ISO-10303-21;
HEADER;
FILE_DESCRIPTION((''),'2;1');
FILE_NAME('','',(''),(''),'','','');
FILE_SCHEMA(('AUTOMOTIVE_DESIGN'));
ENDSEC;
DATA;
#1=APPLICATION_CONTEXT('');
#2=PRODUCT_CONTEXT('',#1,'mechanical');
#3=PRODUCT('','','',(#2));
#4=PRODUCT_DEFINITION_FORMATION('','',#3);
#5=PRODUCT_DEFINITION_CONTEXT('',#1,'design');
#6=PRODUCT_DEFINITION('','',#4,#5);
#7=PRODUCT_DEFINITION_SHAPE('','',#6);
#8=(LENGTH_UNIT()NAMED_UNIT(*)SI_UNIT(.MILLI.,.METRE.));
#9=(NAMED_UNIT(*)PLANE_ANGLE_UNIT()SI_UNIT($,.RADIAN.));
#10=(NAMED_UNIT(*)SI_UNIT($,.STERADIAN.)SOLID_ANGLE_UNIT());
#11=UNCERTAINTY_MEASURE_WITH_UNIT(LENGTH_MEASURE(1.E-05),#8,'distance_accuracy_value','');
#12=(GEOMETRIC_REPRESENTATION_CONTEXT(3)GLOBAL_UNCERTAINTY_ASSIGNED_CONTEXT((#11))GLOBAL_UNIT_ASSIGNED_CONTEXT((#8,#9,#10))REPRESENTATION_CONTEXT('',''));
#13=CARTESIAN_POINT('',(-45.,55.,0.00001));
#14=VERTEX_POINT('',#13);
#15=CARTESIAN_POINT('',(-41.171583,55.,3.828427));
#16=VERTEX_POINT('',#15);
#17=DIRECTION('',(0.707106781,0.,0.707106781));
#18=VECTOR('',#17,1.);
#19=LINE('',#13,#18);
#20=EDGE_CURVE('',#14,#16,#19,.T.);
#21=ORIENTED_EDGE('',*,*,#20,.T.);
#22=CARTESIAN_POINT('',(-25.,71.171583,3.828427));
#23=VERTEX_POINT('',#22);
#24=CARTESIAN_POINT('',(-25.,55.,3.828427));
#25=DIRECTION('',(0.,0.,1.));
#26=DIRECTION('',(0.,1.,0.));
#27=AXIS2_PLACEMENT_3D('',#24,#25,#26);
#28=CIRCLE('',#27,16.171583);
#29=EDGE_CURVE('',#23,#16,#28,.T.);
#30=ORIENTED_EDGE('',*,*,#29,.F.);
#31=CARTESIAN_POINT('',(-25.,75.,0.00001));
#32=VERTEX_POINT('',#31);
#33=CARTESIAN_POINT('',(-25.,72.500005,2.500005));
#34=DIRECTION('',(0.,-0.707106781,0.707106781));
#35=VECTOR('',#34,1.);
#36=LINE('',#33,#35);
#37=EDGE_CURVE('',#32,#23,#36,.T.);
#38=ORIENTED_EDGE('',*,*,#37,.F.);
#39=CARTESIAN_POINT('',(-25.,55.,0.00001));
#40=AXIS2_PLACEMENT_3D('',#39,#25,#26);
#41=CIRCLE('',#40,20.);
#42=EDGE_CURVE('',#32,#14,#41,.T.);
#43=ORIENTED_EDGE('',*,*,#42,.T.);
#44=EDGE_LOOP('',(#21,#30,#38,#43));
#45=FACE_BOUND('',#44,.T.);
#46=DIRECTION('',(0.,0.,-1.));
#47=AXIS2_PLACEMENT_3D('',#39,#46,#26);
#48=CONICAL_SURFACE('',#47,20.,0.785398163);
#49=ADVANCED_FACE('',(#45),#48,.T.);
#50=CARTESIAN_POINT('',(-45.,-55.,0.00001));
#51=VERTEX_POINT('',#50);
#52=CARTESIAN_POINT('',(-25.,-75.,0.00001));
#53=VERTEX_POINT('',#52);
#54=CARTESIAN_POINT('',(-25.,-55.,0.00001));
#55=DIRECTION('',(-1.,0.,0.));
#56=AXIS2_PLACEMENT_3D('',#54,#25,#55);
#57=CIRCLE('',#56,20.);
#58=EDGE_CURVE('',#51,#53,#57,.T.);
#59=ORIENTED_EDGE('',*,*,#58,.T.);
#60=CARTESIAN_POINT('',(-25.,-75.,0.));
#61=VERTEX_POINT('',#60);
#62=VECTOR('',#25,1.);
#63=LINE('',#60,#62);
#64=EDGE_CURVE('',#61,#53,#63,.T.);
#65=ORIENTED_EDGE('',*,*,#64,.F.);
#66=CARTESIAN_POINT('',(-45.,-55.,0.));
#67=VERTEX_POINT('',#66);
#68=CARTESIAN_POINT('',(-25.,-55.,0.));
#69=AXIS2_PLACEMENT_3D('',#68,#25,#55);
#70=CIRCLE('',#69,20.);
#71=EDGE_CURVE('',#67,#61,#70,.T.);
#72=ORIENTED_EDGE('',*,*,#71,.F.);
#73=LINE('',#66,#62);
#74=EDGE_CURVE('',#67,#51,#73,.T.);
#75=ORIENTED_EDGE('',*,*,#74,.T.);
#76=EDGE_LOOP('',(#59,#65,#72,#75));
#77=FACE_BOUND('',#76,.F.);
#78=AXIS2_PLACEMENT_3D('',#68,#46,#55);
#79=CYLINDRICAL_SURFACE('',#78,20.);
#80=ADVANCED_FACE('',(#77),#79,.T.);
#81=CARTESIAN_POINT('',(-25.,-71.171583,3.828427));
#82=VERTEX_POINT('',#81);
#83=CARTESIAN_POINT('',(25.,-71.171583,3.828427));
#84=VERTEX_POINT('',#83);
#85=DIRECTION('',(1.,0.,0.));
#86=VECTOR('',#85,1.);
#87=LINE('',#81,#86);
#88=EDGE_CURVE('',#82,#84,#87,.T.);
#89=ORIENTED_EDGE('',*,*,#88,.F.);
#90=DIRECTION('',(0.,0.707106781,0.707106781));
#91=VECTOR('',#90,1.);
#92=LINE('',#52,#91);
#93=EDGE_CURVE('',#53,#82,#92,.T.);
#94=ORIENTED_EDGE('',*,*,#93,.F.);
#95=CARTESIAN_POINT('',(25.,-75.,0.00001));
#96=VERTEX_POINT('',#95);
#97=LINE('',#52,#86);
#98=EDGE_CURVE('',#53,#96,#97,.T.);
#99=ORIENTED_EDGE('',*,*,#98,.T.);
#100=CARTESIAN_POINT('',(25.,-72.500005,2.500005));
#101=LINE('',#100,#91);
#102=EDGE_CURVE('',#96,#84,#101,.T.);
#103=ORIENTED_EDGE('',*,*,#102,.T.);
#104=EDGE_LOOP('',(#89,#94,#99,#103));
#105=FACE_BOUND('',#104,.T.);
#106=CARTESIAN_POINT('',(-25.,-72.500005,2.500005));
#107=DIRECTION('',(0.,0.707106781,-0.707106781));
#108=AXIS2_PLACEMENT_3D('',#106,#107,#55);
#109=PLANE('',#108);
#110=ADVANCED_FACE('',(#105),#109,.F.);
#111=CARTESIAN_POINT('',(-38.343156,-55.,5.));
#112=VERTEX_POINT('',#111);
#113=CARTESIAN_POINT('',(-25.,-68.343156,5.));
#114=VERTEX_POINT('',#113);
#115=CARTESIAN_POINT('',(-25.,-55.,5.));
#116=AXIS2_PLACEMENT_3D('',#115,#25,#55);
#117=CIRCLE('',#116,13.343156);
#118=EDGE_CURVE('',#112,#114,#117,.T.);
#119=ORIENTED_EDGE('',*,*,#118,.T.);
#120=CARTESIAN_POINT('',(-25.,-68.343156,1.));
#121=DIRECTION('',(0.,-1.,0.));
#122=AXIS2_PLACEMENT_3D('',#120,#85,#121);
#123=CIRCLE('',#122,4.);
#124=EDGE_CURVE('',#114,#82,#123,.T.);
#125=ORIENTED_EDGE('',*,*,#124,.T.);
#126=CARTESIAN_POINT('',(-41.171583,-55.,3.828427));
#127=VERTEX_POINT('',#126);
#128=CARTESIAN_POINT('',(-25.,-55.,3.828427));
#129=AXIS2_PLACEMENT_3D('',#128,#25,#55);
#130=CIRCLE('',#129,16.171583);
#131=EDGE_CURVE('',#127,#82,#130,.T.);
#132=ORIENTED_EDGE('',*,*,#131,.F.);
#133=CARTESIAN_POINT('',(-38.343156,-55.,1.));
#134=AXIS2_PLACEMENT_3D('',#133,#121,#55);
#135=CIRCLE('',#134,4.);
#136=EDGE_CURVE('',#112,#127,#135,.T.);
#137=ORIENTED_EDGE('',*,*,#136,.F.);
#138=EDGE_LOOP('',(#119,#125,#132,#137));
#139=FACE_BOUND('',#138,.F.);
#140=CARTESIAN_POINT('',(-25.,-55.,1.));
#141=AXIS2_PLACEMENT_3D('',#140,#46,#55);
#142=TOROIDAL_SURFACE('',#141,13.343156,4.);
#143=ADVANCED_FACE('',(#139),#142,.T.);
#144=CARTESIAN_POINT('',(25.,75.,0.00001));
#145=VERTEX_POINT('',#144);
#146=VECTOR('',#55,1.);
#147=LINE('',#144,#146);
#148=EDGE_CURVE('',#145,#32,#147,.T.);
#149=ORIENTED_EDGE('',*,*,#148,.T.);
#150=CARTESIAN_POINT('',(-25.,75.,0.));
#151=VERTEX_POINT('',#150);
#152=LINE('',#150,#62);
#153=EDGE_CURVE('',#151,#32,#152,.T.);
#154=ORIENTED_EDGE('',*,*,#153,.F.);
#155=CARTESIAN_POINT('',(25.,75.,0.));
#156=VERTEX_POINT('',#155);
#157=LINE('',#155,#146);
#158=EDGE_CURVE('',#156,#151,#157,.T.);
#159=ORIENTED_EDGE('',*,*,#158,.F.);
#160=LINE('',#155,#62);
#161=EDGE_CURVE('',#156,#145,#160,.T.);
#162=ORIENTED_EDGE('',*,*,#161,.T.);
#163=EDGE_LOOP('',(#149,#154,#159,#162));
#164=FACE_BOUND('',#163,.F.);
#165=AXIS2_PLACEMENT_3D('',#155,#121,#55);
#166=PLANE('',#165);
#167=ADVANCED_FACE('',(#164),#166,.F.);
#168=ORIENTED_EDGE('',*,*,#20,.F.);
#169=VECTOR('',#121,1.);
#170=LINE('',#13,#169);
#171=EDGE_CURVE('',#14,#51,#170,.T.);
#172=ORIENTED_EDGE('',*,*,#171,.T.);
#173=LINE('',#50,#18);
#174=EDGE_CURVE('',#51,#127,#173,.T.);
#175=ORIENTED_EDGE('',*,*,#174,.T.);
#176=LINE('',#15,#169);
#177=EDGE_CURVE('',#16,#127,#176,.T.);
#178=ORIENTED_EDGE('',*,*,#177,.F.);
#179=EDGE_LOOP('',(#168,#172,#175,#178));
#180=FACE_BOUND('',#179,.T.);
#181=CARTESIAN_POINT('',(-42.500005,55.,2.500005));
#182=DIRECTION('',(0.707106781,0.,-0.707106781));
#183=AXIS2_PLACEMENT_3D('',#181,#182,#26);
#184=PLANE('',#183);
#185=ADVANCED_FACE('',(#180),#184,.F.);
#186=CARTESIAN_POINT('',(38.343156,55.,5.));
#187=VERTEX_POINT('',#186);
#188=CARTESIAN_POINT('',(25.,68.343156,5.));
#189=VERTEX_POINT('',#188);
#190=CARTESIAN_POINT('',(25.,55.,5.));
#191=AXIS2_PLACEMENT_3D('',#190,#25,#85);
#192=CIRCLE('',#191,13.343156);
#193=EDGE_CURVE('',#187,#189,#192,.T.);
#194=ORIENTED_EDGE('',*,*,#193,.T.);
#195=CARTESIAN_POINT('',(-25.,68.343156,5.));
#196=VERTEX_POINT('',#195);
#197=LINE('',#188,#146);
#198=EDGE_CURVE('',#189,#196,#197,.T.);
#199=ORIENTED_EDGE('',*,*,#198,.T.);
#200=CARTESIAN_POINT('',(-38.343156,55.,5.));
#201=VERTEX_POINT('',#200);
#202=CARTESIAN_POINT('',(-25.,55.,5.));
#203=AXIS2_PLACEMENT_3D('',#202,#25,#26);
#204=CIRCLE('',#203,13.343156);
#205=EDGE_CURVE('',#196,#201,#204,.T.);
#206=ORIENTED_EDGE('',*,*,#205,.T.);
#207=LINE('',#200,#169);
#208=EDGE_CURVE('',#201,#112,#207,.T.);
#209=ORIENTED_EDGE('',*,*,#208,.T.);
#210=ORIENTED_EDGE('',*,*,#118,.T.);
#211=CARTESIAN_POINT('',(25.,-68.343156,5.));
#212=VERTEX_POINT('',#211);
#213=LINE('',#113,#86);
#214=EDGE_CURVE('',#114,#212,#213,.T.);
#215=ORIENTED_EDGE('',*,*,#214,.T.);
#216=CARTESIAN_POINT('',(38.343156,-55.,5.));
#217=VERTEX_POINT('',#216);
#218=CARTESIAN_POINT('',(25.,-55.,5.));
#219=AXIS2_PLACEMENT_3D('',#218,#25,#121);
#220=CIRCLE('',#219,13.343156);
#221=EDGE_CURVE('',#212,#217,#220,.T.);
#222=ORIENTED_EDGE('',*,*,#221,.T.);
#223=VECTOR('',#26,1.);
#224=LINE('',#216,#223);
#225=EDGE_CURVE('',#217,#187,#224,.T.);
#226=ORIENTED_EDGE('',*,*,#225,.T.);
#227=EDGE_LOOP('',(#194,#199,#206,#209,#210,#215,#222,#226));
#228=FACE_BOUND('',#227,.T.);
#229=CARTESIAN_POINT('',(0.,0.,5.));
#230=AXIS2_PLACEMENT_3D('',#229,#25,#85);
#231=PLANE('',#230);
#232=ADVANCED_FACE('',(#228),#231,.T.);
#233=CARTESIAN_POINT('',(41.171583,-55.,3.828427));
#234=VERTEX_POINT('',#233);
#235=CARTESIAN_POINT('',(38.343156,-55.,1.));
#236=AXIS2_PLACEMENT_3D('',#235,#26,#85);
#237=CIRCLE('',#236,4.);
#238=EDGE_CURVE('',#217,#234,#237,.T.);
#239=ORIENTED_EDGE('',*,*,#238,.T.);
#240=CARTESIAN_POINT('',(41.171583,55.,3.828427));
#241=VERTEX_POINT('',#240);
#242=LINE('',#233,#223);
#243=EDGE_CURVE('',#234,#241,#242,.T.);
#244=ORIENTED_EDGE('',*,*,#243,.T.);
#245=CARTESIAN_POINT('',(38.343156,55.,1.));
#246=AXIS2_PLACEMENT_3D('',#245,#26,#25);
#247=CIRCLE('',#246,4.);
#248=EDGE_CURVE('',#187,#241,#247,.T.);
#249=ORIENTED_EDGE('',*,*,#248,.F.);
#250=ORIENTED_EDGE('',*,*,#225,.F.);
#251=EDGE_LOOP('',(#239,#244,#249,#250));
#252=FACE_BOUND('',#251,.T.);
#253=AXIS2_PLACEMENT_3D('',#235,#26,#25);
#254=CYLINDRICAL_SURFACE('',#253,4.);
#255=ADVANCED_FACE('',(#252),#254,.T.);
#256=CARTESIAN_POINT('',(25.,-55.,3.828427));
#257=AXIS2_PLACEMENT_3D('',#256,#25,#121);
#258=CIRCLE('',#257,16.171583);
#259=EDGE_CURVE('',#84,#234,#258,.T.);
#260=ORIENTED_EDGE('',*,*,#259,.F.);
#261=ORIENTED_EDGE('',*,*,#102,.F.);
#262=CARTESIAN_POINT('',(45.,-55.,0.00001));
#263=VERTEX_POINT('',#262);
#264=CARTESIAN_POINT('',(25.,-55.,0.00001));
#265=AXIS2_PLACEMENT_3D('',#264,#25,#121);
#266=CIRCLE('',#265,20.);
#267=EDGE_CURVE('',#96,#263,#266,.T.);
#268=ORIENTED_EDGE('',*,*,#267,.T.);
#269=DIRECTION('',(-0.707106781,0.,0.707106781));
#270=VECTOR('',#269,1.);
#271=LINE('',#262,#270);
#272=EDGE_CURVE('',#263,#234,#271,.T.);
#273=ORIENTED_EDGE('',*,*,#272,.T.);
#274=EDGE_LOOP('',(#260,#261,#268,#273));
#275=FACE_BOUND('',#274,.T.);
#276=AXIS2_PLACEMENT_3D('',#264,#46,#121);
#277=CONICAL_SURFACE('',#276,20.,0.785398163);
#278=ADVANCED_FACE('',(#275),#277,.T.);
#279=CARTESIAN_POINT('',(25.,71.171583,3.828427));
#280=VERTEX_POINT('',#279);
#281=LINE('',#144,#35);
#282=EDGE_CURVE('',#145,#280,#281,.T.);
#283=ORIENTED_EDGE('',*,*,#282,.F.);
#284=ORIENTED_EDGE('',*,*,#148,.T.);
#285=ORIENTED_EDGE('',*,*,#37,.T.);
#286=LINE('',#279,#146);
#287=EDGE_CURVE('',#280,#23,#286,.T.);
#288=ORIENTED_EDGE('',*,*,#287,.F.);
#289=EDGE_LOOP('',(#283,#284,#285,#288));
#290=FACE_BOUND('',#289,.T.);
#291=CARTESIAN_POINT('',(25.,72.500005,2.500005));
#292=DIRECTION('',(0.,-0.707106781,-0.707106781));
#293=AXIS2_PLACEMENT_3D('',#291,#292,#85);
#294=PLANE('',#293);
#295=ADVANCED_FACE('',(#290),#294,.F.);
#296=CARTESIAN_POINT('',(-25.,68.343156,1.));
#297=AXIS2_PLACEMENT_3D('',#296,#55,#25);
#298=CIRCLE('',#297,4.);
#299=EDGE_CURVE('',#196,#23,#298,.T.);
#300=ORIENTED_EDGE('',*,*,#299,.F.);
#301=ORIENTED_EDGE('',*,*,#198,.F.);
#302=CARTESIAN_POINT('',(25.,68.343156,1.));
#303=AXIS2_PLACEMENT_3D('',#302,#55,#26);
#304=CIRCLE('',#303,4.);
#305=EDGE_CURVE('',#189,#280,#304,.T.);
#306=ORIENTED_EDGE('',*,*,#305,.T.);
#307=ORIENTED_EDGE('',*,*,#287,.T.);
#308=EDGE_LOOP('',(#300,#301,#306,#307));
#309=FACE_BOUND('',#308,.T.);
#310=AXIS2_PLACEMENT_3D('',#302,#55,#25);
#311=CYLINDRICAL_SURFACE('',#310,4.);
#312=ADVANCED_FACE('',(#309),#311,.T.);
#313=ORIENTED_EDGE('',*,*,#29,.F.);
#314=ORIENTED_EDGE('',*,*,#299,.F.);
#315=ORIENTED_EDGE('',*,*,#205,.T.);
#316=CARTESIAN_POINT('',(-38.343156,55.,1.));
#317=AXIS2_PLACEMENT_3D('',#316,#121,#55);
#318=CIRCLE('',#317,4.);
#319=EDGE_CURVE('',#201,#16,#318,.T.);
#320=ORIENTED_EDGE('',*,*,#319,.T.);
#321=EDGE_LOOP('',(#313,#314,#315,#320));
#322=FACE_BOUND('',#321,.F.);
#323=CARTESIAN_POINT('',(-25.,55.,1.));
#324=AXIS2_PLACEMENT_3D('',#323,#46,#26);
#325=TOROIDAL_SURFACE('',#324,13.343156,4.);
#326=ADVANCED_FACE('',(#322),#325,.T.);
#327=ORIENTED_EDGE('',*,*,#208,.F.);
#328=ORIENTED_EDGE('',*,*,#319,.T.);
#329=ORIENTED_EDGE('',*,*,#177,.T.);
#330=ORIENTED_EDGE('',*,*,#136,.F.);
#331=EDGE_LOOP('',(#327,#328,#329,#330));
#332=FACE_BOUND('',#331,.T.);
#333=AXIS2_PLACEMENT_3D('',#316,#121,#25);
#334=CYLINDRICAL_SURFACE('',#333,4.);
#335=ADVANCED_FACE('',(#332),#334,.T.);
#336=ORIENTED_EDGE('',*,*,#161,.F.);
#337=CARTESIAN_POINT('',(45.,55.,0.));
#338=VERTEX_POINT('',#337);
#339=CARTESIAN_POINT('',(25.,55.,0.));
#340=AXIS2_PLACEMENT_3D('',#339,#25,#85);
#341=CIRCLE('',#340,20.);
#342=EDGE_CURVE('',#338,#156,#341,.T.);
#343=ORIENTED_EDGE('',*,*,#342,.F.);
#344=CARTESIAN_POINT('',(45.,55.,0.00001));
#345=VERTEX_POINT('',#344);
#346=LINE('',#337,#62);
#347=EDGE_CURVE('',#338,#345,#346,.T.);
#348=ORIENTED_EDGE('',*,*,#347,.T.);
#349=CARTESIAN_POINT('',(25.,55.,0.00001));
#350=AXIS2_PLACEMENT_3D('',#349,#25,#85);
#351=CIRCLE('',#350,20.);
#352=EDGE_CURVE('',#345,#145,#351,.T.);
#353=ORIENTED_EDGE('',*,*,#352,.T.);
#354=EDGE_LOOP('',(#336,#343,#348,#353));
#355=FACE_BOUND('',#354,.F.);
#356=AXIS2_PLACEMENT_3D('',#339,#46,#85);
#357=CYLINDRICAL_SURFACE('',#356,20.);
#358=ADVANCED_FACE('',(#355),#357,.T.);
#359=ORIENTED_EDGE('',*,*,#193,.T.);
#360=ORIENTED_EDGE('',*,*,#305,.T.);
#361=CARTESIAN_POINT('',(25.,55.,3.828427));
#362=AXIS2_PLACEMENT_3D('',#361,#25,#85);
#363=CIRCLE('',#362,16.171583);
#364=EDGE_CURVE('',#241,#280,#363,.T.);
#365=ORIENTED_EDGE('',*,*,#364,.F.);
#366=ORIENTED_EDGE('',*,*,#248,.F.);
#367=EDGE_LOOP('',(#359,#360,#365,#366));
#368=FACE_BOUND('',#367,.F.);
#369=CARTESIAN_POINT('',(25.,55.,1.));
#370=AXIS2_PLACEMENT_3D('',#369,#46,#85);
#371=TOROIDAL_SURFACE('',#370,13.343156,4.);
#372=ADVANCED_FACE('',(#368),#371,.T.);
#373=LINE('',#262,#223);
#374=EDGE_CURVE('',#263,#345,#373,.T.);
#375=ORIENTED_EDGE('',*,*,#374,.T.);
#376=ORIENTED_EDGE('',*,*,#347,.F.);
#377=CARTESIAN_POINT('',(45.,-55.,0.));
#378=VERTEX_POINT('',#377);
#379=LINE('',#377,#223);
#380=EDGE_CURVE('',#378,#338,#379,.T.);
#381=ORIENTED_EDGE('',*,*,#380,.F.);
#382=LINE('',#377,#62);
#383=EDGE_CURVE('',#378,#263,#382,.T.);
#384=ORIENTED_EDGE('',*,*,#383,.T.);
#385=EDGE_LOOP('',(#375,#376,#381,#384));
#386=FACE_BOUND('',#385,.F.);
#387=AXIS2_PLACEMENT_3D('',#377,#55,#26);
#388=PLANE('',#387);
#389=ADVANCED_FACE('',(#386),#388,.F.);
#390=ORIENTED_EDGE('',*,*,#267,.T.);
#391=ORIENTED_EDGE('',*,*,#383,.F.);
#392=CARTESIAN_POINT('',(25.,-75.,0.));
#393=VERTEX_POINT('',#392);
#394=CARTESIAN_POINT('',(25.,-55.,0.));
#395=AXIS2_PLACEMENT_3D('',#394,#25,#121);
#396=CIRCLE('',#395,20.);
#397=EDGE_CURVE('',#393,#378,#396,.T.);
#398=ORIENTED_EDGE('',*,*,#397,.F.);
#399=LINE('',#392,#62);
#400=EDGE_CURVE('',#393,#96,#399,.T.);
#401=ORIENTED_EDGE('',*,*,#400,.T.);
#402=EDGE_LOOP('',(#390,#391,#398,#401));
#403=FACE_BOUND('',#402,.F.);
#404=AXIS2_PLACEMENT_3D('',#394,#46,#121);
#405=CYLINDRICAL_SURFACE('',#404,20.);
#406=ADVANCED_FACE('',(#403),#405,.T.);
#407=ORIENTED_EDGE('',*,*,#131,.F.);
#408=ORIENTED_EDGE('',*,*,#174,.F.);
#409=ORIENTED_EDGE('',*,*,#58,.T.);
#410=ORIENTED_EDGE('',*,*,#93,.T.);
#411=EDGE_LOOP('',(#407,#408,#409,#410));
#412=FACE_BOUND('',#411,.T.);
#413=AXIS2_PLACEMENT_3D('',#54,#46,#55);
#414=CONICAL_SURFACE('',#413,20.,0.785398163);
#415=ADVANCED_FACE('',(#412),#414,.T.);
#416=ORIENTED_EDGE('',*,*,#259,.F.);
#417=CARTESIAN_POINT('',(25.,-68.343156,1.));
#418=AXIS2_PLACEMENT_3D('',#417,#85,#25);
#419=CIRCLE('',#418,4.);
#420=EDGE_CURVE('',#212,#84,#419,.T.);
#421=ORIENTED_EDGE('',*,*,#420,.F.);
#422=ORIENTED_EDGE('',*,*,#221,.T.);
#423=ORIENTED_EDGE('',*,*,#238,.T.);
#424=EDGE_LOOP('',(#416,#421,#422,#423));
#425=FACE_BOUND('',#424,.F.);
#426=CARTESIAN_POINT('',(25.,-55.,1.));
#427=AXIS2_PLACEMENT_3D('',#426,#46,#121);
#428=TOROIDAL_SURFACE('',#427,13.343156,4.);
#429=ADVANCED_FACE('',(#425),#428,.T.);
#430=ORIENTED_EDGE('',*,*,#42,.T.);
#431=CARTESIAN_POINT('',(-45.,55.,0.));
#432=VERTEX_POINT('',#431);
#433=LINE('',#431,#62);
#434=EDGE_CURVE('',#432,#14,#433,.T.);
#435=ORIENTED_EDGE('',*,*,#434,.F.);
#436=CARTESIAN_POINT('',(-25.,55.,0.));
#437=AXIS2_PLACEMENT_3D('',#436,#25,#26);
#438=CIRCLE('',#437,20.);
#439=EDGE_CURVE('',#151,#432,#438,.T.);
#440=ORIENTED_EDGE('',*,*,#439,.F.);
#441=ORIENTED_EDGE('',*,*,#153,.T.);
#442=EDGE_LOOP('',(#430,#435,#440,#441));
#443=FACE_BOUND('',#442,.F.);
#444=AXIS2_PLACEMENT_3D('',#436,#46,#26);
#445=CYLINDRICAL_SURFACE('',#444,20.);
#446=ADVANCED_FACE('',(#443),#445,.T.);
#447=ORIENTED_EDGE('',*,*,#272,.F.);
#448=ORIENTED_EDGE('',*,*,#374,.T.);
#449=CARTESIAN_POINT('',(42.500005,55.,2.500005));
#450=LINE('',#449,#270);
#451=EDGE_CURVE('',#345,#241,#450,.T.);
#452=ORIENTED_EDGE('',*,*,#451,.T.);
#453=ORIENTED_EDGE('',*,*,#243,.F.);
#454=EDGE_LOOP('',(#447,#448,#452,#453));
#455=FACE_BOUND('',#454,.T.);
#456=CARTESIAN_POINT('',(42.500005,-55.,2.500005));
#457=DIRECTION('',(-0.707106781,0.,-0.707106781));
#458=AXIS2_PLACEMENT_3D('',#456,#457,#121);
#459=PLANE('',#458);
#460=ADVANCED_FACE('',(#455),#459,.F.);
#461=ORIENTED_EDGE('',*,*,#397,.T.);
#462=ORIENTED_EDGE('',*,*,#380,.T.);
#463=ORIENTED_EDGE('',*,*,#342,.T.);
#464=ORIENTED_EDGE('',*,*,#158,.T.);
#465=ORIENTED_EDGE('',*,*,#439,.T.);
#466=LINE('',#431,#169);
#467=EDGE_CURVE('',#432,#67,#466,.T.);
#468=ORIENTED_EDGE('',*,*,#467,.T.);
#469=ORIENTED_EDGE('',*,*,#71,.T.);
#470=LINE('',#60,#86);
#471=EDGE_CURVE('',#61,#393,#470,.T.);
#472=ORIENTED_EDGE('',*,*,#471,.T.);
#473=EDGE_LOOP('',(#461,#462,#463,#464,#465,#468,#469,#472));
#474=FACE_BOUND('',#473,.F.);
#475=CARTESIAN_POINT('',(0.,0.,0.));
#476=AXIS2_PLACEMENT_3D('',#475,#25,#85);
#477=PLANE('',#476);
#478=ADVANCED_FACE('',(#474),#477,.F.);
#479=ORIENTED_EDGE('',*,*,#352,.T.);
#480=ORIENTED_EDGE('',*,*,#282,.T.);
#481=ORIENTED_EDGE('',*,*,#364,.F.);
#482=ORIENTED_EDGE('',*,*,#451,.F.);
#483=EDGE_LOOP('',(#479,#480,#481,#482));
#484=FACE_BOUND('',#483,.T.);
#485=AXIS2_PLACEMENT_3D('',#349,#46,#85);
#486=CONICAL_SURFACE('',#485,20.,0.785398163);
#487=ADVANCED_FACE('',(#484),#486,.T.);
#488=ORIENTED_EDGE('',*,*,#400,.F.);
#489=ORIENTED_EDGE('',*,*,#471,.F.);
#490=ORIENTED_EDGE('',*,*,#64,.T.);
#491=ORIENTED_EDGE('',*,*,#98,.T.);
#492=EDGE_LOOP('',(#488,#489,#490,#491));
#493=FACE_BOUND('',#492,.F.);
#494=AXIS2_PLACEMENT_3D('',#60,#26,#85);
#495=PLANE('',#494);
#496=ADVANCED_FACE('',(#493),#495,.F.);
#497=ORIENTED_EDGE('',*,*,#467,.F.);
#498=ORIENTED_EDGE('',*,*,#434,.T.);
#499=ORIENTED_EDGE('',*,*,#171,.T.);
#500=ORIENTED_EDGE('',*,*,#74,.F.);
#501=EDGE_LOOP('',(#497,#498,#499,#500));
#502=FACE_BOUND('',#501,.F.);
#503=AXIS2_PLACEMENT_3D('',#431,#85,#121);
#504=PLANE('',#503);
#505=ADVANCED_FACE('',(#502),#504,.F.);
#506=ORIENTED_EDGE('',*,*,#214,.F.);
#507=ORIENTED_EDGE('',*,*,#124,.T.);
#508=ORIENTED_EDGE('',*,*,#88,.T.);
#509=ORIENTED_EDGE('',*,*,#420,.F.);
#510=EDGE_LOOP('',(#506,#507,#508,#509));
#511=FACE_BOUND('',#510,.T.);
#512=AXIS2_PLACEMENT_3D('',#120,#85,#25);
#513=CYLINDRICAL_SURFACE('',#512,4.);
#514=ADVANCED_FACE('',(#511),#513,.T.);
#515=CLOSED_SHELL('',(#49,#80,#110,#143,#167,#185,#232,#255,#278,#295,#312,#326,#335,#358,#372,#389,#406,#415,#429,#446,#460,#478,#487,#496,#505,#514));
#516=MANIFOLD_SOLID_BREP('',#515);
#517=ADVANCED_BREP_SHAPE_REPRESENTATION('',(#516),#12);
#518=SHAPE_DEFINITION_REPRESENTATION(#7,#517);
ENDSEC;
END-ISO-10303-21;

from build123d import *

# Parameters (mm, degrees)
F1_DEPTH = 5
F2_SIZE  = 4.99999
F3_R     = 4


# Not quite as in the source:
# - a fillet or chamfer is up to 0.001 mm smaller than in the source, because OpenCascade refuses the exact size


with BuildPart() as f1:
    # F0 (on Top) → F1 (new body)
    with BuildSketch(Plane.XY):
        with BuildLine():
            Line((25, 75), (-25, 75))
            ThreePointArc((-25, 75), (-39.1421356237, 69.1421356237), (-45, 55))
            Line((-45, 55), (-45, -55))
            ThreePointArc((-45, -55), (-39.1421356237, -69.1421356237), (-25, -75))
            Line((-25, -75), (25, -75))
            ThreePointArc((25, -75), (39.1421356237, -69.1421356237), (45, -55))
            Line((45, -55), (45, 55))
            ThreePointArc((45, 55), (39.1421356237, 69.1421356237), (25, 75))
        make_face()
    extrude(amount=F1_DEPTH)

    # F2 (size 5 in the source; OpenCascade refuses exactly that, so slightly less here)
    f2_edges = [f1.edges().sort_by_distance(p)[0] for p in [
        (-39.142136, -69.142136, 5),
        (0, -75, 5),
        (39.142136, -69.142136, 5),
        (45, 0, 5),
        (39.142136, 69.142136, 5),
        (0, 75, 5),
        (-39.142136, 69.142136, 5),
        (-45, 0, 5),
    ]]
    chamfer(f2_edges, length=F2_SIZE)

    # F3
    f3_edges = [f1.edges().sort_by_distance(p)[0] for p in [
        (-35.606609, -65.606609, 5),
        (-40.00001, 0, 5),
        (0, -70.00001, 5),
        (-35.606609, 65.606609, 5),
        (35.606609, -65.606609, 5),
        (0, 70.00001, 5),
        (40.00001, 0, 5),
        (35.606609, 65.606609, 5),
    ]]
    fillet(f3_edges, radius=F3_R)


solid = f1.part
